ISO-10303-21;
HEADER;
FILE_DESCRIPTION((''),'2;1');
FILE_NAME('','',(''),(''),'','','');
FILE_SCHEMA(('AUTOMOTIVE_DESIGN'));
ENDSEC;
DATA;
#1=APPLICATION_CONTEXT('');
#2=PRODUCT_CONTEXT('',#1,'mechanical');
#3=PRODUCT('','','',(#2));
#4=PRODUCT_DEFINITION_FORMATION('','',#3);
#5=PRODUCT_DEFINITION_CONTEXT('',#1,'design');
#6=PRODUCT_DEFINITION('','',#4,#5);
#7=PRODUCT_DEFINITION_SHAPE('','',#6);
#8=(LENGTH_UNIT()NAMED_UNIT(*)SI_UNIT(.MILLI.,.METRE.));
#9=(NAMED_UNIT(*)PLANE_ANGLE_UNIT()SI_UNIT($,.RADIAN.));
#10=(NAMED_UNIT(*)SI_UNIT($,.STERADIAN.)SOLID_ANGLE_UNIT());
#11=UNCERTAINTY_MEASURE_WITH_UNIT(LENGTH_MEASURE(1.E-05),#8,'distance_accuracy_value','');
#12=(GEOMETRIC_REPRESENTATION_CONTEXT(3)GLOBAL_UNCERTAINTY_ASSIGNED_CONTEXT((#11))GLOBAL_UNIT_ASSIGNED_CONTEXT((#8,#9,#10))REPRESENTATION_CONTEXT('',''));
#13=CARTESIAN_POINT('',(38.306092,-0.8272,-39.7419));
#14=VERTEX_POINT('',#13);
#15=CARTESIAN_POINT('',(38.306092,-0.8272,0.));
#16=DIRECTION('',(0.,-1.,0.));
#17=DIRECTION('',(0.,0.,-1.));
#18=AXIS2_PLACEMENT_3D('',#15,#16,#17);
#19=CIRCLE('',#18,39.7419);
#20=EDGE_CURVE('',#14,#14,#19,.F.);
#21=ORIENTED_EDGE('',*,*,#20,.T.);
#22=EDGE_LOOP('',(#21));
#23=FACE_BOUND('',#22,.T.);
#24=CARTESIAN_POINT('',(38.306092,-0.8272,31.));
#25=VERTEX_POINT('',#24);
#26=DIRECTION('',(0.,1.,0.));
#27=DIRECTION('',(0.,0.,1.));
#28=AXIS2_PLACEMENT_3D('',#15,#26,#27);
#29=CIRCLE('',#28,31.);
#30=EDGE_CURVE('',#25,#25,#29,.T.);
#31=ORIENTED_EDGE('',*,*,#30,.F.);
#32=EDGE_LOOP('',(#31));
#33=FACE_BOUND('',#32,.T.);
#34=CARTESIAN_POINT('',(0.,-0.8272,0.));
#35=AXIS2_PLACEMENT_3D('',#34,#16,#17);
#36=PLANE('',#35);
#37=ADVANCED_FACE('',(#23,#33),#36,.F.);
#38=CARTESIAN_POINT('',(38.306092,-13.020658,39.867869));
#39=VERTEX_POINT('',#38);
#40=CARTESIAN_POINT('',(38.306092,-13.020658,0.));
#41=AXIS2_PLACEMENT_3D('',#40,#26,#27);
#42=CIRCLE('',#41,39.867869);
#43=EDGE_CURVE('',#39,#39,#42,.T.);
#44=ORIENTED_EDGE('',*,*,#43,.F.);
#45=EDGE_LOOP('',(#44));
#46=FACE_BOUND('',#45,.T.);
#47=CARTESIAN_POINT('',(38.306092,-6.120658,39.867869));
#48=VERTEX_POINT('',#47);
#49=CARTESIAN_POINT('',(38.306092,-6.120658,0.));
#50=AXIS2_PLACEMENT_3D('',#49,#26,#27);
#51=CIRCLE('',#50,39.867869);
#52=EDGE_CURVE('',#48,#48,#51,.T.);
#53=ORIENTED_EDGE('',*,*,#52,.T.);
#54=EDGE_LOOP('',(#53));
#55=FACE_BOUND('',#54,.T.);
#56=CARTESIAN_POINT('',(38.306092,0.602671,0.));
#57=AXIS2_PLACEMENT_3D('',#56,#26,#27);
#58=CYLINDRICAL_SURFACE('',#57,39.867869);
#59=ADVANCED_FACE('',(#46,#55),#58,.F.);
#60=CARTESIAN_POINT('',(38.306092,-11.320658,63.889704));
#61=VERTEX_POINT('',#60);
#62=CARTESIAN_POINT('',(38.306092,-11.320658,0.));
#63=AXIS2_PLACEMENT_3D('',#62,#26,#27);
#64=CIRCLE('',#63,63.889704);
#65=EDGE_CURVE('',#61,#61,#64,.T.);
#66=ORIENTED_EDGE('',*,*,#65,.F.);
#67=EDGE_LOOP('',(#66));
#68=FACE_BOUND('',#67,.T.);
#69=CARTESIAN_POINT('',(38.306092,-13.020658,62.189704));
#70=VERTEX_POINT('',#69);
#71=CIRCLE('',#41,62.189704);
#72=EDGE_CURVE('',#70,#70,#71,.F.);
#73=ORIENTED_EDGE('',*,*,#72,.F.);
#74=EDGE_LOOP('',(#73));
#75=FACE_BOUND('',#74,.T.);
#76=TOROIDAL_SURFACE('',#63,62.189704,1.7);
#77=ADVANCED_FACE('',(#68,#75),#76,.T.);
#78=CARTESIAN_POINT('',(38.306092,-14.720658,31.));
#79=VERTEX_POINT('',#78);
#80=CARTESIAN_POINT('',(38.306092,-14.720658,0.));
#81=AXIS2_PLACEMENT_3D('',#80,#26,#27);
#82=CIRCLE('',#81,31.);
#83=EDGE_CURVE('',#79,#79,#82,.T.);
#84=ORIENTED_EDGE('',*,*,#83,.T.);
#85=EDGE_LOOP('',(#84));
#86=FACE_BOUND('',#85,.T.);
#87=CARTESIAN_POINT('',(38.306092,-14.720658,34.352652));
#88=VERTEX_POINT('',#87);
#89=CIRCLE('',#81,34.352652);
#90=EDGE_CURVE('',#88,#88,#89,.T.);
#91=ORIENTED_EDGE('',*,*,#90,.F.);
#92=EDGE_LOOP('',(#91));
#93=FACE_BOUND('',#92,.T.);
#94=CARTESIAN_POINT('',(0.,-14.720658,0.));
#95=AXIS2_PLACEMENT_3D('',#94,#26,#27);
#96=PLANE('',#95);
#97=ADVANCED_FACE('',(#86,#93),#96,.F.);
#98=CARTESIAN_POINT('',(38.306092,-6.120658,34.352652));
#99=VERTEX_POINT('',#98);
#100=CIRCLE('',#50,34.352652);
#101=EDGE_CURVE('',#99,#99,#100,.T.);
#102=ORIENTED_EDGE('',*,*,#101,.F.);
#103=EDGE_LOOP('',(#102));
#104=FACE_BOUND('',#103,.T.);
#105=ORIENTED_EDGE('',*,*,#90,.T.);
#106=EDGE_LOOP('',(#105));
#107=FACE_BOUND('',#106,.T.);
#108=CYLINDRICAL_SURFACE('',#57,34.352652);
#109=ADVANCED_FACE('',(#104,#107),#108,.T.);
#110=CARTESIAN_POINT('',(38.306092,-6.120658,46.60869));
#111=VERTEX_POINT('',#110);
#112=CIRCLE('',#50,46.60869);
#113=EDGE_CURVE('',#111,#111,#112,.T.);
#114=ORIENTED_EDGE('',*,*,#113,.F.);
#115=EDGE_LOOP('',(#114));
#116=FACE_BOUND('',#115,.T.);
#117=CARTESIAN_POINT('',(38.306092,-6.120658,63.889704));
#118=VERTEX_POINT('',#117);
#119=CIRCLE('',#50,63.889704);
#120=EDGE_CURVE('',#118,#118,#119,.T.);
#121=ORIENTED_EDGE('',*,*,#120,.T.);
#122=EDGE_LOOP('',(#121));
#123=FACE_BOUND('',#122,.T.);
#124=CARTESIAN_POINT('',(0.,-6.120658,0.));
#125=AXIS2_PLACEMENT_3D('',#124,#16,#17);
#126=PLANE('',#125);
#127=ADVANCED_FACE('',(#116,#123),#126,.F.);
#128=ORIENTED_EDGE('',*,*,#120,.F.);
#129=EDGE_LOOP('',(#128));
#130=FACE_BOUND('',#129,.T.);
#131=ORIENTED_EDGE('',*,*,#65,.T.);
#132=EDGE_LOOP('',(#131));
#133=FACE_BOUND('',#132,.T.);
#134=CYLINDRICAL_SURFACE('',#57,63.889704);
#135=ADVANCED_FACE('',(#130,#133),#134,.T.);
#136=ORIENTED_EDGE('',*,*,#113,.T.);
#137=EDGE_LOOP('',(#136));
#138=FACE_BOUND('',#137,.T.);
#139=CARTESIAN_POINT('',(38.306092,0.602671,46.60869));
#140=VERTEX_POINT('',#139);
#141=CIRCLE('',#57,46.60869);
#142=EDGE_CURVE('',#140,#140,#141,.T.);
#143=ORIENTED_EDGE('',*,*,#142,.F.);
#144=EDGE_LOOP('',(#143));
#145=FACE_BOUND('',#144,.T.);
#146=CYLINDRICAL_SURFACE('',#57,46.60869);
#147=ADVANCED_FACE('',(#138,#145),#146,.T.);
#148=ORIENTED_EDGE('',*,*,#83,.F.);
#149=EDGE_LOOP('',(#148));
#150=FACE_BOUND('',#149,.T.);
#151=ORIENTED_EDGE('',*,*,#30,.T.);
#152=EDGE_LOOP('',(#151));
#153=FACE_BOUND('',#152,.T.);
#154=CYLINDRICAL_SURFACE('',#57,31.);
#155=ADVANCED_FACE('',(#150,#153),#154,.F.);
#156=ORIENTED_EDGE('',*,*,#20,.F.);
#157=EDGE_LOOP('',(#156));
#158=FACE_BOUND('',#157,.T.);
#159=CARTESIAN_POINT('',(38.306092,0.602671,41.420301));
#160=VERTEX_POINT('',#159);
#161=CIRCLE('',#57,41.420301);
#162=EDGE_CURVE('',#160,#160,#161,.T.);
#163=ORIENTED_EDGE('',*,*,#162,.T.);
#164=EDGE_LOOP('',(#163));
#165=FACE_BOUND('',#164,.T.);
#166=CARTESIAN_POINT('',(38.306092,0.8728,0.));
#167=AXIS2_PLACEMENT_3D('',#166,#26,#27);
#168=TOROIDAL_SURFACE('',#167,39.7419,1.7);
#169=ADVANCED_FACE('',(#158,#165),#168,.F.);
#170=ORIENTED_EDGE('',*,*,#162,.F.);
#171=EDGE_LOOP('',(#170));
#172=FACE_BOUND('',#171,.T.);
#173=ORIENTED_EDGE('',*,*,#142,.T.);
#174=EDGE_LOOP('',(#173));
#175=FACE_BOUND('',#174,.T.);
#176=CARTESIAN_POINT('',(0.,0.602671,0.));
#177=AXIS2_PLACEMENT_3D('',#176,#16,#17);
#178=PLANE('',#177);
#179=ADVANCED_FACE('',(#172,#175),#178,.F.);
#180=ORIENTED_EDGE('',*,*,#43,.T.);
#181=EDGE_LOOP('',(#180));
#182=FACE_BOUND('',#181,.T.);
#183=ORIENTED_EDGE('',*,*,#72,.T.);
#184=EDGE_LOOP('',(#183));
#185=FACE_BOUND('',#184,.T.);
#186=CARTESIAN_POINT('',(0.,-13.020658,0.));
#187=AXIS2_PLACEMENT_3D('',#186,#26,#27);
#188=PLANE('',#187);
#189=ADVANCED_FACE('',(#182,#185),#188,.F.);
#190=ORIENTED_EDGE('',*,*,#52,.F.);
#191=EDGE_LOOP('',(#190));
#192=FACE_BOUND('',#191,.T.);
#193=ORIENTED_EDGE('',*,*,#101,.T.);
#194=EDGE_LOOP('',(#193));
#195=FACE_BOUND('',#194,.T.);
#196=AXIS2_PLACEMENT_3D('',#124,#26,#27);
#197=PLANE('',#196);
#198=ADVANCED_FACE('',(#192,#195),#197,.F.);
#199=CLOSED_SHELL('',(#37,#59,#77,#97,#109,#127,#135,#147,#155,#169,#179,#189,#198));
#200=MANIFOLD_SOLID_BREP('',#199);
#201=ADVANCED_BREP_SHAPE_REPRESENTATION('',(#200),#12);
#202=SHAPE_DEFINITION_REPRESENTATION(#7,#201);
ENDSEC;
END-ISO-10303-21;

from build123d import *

# Parameters (mm, degrees)
FILLET3_R = 1.7
FILLET4_R = 1.7


with BuildPart() as part:
    # Sketch1 → Revolve2 (revolve)
    with BuildSketch(Plane.XY, mode=Mode.PRIVATE) as revolve2_sk:
        Polygon((-3.114208506, -0.827200396), (7.306092253, -0.827200396), (7.306092253, -14.720657828), (3.953440281, -14.720657828), (3.953440281, -6.120657828), (-1.56177698, -6.120657828), (-1.56177698, -13.020657828), (-25.583612163, -13.020657828), (-25.583612163, -6.120657828), (-8.302598077, -6.120657828), (-8.302598077, 0.602670746), (-3.114208506, 0.602670746), align=None)
    revolve(revolve2_sk.sketch.rotate(Axis((38.306092253, 0.602670746, 0), (0, -1, 0)), 270), axis=Axis((38.306092253, 0.602670746, 0), (0, -1, 0)))

    # Fillet3
    # the kernel refuses this fillet: 1.7 mm, written as the material it adds along each edge
    with BuildSketch(Plane(origin=(38.306092253, -0.827200396, 0), x_dir=(0, 0, 1), z_dir=(1, 0, 0))) as fillet3_piece_1:
        with BuildLine():
            CenterArc((39.741899614, -1.7), FILLET3_R, 9.143015085, 80.856984915)
            Line((41.420300758, -1.429871142), (41.453868781, -1.424468565))
            ThreePointArc((41.453868781, -1.424468565), (41.454300758, -0.714935571), (41.454300758, 0))
            Line((41.454300758, 0), (41.420300758, 0.034))
            Line((41.420300758, 0.034), (39.741899614, 0.034))
            Line((39.741899614, 0.034), (39.741899614, 0))
        make_face()
    revolve(axis=Axis((38.306092253, -0.827200396, 0), (0, -1, 0)))

    # Fillet4
    fillet4_edges = [part.edges().sort_by_distance(p)[0] for p in [
        (38.306092253, -13.020657828, -63.889704416),
    ]]
    fillet(fillet4_edges, radius=FILLET4_R)


solid = part.part
